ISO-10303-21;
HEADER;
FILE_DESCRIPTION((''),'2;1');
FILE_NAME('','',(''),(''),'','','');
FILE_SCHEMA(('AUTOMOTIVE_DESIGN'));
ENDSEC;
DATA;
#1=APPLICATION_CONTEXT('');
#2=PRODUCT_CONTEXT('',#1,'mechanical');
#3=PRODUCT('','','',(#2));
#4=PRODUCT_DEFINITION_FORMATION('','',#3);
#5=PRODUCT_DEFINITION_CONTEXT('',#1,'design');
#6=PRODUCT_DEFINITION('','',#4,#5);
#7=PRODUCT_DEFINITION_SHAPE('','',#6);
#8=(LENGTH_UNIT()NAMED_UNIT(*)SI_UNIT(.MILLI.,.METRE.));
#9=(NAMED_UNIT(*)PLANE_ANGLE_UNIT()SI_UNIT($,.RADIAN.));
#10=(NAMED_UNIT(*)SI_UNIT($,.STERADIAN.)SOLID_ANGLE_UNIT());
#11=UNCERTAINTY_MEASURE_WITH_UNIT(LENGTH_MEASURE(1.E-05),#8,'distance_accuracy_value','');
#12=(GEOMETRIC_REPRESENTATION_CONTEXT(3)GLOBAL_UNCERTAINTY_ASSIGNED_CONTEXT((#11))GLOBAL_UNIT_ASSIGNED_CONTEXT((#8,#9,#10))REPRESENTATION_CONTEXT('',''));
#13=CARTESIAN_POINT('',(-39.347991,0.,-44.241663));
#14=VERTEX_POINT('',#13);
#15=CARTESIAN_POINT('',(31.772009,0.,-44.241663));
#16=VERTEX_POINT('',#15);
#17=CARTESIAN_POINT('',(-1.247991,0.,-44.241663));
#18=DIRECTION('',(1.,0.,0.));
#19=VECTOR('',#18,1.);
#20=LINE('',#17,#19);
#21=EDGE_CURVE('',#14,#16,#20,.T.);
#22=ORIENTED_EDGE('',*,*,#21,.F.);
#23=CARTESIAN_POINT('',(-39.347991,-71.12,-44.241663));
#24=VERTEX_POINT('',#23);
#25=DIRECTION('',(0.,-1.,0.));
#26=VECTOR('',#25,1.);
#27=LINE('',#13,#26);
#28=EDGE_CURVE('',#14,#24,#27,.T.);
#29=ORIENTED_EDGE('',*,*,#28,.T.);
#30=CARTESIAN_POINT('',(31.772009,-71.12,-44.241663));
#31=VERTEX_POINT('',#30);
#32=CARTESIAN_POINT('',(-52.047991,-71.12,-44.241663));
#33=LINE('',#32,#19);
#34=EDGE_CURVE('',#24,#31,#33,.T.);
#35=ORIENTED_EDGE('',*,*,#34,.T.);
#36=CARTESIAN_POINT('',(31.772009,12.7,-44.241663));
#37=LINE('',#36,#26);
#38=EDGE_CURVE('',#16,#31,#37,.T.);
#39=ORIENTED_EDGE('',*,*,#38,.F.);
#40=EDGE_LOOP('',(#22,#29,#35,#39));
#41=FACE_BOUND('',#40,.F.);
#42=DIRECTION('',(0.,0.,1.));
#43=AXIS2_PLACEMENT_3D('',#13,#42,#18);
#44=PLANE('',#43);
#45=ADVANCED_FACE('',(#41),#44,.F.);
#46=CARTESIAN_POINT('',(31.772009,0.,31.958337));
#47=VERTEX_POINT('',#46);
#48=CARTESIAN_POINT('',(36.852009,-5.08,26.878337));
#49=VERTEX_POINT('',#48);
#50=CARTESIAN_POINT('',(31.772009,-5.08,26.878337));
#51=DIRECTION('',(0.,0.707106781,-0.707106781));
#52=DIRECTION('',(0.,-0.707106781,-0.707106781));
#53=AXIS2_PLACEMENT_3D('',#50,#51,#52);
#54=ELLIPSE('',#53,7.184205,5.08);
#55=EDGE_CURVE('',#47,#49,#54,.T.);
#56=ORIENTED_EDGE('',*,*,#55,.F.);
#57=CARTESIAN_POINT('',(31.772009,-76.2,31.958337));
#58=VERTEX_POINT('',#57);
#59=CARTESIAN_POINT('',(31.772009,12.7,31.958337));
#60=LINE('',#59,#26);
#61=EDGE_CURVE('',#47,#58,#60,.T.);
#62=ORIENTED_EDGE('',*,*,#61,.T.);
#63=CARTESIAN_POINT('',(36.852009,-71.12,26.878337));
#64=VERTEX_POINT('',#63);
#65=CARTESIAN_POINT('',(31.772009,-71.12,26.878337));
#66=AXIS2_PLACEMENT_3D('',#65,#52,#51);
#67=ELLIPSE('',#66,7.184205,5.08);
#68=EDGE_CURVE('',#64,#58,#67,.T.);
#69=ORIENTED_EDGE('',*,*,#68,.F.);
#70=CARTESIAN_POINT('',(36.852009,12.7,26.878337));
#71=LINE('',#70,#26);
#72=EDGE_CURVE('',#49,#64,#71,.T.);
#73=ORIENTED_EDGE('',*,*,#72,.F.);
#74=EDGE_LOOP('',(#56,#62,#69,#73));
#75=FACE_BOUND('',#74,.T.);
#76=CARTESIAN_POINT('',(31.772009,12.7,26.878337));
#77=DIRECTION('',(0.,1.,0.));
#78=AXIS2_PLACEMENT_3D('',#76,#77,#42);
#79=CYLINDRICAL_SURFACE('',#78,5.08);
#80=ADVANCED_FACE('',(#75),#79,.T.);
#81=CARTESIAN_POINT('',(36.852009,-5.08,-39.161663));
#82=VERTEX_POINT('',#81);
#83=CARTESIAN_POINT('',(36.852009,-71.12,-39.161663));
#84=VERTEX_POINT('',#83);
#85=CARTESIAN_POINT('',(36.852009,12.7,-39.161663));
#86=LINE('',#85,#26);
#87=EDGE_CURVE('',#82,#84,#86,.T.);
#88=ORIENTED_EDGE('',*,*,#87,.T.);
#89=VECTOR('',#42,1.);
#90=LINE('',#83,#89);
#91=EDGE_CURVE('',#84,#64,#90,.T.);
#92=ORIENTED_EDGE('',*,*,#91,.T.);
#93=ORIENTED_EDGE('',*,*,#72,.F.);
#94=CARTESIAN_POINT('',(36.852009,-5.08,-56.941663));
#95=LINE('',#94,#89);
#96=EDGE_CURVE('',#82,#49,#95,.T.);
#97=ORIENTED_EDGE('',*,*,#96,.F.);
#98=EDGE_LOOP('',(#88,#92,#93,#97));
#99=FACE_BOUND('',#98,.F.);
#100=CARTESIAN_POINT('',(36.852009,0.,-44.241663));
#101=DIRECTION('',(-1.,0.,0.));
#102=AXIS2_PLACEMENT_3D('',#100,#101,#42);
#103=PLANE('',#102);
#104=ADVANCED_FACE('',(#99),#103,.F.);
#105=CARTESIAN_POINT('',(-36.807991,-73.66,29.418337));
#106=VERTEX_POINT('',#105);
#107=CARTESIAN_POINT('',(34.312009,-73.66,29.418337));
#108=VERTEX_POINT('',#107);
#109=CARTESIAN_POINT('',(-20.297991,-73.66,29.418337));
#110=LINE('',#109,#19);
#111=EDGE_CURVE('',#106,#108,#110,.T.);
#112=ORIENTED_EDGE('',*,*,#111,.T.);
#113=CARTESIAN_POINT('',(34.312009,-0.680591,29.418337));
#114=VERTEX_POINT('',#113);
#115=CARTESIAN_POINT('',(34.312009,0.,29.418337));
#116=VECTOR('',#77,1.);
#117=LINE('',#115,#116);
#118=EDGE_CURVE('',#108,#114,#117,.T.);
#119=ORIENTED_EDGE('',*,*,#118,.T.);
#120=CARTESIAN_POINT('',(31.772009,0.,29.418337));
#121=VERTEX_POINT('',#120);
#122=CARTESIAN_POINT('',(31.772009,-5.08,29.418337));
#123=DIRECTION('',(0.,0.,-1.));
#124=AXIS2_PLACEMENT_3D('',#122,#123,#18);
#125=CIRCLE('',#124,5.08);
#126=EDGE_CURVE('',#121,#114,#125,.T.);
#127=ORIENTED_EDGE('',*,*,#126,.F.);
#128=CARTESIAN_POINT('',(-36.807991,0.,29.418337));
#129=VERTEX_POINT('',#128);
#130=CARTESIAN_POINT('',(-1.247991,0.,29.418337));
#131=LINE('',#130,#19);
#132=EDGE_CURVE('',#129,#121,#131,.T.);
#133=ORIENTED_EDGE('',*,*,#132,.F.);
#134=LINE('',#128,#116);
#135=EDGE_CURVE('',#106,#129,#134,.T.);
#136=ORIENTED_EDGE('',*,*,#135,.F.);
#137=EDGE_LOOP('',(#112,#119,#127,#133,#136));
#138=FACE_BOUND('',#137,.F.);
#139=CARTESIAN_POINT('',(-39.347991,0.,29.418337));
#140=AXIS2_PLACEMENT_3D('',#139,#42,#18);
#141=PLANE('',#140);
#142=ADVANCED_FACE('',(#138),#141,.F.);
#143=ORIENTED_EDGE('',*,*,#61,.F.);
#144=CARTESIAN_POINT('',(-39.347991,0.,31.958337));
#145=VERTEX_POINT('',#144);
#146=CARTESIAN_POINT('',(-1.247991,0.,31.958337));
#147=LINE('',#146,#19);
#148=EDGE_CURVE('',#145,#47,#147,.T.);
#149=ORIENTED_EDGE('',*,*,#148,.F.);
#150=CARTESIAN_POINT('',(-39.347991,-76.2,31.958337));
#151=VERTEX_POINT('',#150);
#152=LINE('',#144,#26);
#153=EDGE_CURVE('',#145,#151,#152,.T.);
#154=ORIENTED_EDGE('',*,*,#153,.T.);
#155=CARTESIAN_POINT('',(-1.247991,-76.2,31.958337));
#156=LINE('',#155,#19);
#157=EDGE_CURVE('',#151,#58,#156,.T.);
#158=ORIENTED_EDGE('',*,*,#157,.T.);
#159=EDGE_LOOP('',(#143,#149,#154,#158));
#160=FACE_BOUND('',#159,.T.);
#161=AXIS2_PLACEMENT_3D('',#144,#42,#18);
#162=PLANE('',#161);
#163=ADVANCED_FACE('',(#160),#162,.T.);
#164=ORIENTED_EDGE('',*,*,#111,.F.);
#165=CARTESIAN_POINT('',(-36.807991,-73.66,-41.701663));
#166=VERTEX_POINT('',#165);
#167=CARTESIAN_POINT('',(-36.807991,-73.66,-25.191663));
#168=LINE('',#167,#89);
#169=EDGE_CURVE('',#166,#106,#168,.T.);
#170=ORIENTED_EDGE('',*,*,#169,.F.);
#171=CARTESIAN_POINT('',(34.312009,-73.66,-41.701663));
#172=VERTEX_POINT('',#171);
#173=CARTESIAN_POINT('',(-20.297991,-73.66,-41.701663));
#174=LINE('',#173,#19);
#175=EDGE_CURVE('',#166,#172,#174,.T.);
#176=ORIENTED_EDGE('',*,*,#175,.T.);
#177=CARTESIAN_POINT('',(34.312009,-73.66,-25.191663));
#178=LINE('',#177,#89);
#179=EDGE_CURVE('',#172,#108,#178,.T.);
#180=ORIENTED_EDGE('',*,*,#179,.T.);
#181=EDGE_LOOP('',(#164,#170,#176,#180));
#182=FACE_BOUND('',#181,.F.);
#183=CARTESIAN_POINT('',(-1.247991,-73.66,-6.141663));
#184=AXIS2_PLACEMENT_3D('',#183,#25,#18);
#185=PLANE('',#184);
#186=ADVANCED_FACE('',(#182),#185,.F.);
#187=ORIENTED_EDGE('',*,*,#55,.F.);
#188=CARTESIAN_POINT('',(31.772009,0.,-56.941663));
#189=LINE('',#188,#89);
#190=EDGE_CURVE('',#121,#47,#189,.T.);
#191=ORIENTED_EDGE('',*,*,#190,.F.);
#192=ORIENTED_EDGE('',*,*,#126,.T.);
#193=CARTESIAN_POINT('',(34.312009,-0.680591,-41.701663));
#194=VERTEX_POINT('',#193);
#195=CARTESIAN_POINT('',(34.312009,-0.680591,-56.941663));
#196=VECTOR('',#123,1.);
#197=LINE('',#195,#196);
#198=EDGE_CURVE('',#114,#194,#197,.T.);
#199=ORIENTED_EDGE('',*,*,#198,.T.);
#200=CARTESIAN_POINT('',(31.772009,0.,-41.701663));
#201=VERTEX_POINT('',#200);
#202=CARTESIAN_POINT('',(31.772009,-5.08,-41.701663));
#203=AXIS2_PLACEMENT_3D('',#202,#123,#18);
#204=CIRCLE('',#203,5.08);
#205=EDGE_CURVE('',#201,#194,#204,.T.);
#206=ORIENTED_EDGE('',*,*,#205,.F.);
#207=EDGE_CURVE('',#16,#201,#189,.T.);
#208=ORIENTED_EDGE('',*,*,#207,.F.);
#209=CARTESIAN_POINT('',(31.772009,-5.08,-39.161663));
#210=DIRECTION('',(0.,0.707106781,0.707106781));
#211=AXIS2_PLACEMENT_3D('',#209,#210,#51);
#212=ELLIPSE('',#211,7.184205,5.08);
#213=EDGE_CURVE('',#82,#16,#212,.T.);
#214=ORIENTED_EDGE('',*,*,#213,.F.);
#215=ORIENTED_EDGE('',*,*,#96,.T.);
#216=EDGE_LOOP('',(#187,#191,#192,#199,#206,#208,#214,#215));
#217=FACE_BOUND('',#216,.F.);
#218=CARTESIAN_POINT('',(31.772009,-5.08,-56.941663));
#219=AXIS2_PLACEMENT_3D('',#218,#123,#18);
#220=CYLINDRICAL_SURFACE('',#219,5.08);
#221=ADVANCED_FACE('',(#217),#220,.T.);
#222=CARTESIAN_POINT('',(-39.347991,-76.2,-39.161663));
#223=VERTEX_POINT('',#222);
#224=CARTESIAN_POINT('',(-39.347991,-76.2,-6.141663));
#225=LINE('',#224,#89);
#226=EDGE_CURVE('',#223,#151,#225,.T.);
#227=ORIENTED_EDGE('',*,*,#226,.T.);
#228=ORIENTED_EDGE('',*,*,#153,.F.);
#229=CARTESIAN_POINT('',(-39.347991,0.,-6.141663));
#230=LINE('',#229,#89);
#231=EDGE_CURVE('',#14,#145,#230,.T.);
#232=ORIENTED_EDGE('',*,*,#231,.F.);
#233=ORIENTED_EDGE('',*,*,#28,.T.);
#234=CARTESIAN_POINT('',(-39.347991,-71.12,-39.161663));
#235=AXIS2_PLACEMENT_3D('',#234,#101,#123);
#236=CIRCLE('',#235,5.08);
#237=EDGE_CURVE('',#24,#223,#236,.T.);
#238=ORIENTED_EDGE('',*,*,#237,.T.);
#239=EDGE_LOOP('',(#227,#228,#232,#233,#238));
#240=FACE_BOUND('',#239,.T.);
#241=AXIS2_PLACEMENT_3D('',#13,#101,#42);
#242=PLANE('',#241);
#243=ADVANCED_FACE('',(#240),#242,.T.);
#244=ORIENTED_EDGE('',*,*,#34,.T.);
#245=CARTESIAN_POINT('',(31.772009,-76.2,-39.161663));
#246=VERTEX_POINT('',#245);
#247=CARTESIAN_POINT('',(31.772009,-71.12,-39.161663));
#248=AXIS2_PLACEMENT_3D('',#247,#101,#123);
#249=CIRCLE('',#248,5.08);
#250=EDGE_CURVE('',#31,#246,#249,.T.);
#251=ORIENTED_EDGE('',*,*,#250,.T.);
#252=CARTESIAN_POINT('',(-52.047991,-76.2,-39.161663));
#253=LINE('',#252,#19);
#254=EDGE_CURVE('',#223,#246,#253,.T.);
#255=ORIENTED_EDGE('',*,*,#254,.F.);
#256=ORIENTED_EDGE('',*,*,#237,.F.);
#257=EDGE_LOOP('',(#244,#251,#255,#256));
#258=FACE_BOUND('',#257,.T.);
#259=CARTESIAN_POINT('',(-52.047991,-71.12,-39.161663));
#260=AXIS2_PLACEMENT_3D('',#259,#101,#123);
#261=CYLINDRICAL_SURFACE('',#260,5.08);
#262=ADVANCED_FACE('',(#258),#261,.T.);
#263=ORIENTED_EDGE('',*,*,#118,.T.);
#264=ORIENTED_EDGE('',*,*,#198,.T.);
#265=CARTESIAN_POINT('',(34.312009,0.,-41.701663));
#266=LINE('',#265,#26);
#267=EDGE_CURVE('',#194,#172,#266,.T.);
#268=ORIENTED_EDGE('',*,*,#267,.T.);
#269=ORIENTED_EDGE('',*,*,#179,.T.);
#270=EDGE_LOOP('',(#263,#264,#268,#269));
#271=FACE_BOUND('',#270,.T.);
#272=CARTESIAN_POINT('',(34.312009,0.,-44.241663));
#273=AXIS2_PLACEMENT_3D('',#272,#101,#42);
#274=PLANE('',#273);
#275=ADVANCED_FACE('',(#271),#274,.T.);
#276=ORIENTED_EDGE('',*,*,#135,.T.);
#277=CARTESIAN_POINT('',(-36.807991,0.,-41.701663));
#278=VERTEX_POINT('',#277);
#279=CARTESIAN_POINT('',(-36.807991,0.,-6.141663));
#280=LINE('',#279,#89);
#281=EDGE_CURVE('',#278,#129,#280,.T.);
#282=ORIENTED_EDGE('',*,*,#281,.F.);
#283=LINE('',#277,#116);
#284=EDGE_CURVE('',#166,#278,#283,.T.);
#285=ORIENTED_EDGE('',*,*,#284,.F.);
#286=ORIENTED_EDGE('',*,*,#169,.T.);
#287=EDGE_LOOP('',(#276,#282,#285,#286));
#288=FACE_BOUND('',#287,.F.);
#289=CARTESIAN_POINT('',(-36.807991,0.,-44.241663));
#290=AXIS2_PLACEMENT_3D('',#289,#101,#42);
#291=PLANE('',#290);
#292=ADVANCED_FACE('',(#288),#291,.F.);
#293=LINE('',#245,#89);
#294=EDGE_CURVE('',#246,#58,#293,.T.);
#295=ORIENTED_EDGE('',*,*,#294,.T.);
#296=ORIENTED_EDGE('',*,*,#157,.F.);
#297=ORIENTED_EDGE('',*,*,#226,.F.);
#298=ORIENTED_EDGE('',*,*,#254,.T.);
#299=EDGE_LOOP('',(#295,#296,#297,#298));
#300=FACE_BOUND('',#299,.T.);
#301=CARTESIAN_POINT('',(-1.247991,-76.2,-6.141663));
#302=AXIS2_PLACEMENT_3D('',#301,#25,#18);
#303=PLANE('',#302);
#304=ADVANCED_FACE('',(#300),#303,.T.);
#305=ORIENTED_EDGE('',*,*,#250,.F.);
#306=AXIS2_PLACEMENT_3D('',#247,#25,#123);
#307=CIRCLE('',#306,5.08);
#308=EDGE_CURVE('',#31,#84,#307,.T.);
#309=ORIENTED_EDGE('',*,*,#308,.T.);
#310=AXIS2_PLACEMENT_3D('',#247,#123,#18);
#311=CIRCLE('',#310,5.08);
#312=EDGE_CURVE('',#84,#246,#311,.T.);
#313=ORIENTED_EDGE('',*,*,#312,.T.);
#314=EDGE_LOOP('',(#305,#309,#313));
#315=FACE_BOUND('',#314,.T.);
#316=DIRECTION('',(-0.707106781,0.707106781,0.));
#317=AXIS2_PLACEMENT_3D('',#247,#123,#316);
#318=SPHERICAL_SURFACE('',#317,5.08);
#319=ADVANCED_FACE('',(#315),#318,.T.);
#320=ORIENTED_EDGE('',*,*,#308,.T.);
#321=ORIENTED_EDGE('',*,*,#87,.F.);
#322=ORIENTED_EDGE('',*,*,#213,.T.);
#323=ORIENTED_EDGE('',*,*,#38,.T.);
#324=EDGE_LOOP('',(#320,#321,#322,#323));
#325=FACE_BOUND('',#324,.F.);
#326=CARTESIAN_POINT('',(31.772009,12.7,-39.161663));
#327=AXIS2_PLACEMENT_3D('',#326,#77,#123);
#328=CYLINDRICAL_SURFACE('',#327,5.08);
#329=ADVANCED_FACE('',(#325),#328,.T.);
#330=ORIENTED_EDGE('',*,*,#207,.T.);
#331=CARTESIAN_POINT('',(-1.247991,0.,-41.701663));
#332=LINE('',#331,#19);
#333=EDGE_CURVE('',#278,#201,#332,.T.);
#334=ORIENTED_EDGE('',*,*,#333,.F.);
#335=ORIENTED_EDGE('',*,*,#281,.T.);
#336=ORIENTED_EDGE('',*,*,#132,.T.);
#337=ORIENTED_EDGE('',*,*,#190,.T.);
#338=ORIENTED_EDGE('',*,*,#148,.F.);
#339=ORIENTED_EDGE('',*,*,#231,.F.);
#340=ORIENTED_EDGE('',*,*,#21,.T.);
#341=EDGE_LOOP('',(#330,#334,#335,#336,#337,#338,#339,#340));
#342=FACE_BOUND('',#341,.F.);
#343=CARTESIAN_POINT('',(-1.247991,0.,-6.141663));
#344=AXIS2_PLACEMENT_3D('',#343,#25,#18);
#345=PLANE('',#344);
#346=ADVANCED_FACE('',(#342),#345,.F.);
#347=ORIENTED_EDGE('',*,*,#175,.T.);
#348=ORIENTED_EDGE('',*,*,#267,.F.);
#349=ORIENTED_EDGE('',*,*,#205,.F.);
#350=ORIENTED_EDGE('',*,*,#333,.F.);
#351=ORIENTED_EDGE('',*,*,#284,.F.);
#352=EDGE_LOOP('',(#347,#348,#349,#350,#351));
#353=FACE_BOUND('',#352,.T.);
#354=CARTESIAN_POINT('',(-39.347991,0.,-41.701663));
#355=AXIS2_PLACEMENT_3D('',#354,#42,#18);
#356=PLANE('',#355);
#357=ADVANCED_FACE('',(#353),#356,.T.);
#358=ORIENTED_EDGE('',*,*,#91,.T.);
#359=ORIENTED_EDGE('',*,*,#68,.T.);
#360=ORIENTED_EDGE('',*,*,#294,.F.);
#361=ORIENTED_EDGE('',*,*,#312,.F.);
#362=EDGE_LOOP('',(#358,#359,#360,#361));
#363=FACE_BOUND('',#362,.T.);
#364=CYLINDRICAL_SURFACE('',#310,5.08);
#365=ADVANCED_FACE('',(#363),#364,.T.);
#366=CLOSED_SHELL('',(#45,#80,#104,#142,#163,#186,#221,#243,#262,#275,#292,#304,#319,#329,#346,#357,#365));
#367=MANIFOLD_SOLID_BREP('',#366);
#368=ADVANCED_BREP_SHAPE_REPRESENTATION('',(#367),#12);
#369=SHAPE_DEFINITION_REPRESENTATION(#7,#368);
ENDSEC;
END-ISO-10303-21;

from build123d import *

# Parameters (mm, degrees)
F0_W         = 76.2
F0_H         = 76.2
F1_DEPTH     = 76.2
F2_T         = -2.54
F3_T1_DEPTH  = 83.82
F3_T3_DEPTH  = 83.82
F3_T5_DEPTH  = 83.82
F3_T7_DEPTH  = 101.6
F3_T9_DEPTH  = 101.6
F3_S13_W     = 5.08
F3_S13_H     = 5.08
F3_T14_DEPTH = 5.08


# Not quite as in the source:
# - a fillet or chamfer that OpenCascade refuses, or shapes differently, is made with other operations: its cross-section is extruded or revolved along the edge and cut away or added


with BuildPart() as f1:
    # F0 (on Front) → F1 (new body)
    with BuildSketch(Plane.XZ):
        with Locations((-1.2479908764, -6.1416627283)):
            Rectangle(F0_W, F0_H)
    extrude(amount=F1_DEPTH)

    # F2
    f2_openings = [f1.faces().sort_by_distance(p)[0] for p in [
        (-1.247991, 0, -6.141663),
    ]]
    offset(amount=F2_T, openings=f2_openings)

    # F3: fillet of radius 5.08 on 5 edges, made by hand

    # F3_s2 → F3_t1 (cut)
    with BuildSketch(Plane.XY.offset(-39.1616627283)):
        with BuildLine():
            ThreePointArc((36.8520091236, -71.12), (35.364111572, -74.7121024484), (31.7720091236, -76.2))
            Line((31.7720091236, -76.2), (36.8520091236, -76.2))
            Line((36.8520091236, -76.2), (36.8520091236, -71.12))
        make_face()
    extrude(amount=F3_T1_DEPTH, mode=Mode.SUBTRACT)

    # F3_s4 → F3_t3 (cut)
    with BuildSketch(Plane.YZ.offset(-52.0479908764)):
        with BuildLine():
            ThreePointArc((-71.12, -44.2416627283), (-74.7121024484, -42.7537651767), (-76.2, -39.1616627283))
            Line((-76.2, -39.1616627283), (-76.2, -44.2416627283))
            Line((-76.2, -44.2416627283), (-71.12, -44.2416627283))
        make_face()
    extrude(amount=F3_T3_DEPTH, mode=Mode.SUBTRACT)

    # F3_s6 → F3_t5 (cut)
    with BuildSketch(Plane.XZ.offset(-12.7)):
        with BuildLine():
            ThreePointArc((31.7720091236, -44.2416627283), (35.364111572, -42.7537651767), (36.8520091236, -39.1616627283))
            Line((36.8520091236, -39.1616627283), (36.8520091236, -44.2416627283))
            Line((36.8520091236, -44.2416627283), (31.7720091236, -44.2416627283))
        make_face()
    extrude(amount=F3_T5_DEPTH, mode=Mode.SUBTRACT)

    # F3_s8 → F3_t7 (cut)
    with BuildSketch(Plane.XY.offset(-56.9416627283)):
        with BuildLine():
            ThreePointArc((36.8520091236, -5.08), (35.364111572, -1.4878975516), (31.7720091236, 0))
            Line((31.7720091236, 0), (36.8520091236, 0))
            Line((36.8520091236, 0), (36.8520091236, -5.08))
        make_face()
    extrude(amount=F3_T7_DEPTH, mode=Mode.SUBTRACT)

    # F3_s10 → F3_t9 (cut)
    with BuildSketch(Plane.XZ.offset(-12.7)):
        with BuildLine():
            ThreePointArc((31.7720091236, 31.9583372717), (35.364111572, 30.4704397201), (36.8520091236, 26.8783372717))
            Line((36.8520091236, 26.8783372717), (36.8520091236, 31.9583372717))
            Line((36.8520091236, 31.9583372717), (31.7720091236, 31.9583372717))
        make_face()
    extrude(amount=F3_T9_DEPTH, mode=Mode.SUBTRACT)


with BuildPart() as f3_tool12:
    # F3_s13 → F3_t14 (new body)
    with BuildSketch(Plane.XY.offset(-39.1616627283)):
        with Locations((34.3120091236, -73.66)):
            Rectangle(F3_S13_W, F3_S13_H)
    extrude(amount=-F3_T14_DEPTH)

    # F3_s15 → F3_t16 (revolve, cut)
    with BuildSketch(Plane(origin=(31.7720091236, -71.12, -39.1616627283), x_dir=(-0.7071067812, 0.7071067812, 0), z_dir=(-0.7071067812, -0.7071067812, 0))):
        with BuildLine():
            ThreePointArc((0, -5.08), (5.08, 0), (0, 5.08))
            Line((0, 5.08), (0, -5.08))
        make_face()
    revolve(axis=Axis((31.7720091236, -71.12, -39.1616627283), (0, 0, -1)), mode=Mode.SUBTRACT)


with BuildPart() as f1_1:
    add(f1.part)

    # F3_t11: cut F3_tool12
    add(f3_tool12.part, mode=Mode.SUBTRACT)


solid = f1_1.part
